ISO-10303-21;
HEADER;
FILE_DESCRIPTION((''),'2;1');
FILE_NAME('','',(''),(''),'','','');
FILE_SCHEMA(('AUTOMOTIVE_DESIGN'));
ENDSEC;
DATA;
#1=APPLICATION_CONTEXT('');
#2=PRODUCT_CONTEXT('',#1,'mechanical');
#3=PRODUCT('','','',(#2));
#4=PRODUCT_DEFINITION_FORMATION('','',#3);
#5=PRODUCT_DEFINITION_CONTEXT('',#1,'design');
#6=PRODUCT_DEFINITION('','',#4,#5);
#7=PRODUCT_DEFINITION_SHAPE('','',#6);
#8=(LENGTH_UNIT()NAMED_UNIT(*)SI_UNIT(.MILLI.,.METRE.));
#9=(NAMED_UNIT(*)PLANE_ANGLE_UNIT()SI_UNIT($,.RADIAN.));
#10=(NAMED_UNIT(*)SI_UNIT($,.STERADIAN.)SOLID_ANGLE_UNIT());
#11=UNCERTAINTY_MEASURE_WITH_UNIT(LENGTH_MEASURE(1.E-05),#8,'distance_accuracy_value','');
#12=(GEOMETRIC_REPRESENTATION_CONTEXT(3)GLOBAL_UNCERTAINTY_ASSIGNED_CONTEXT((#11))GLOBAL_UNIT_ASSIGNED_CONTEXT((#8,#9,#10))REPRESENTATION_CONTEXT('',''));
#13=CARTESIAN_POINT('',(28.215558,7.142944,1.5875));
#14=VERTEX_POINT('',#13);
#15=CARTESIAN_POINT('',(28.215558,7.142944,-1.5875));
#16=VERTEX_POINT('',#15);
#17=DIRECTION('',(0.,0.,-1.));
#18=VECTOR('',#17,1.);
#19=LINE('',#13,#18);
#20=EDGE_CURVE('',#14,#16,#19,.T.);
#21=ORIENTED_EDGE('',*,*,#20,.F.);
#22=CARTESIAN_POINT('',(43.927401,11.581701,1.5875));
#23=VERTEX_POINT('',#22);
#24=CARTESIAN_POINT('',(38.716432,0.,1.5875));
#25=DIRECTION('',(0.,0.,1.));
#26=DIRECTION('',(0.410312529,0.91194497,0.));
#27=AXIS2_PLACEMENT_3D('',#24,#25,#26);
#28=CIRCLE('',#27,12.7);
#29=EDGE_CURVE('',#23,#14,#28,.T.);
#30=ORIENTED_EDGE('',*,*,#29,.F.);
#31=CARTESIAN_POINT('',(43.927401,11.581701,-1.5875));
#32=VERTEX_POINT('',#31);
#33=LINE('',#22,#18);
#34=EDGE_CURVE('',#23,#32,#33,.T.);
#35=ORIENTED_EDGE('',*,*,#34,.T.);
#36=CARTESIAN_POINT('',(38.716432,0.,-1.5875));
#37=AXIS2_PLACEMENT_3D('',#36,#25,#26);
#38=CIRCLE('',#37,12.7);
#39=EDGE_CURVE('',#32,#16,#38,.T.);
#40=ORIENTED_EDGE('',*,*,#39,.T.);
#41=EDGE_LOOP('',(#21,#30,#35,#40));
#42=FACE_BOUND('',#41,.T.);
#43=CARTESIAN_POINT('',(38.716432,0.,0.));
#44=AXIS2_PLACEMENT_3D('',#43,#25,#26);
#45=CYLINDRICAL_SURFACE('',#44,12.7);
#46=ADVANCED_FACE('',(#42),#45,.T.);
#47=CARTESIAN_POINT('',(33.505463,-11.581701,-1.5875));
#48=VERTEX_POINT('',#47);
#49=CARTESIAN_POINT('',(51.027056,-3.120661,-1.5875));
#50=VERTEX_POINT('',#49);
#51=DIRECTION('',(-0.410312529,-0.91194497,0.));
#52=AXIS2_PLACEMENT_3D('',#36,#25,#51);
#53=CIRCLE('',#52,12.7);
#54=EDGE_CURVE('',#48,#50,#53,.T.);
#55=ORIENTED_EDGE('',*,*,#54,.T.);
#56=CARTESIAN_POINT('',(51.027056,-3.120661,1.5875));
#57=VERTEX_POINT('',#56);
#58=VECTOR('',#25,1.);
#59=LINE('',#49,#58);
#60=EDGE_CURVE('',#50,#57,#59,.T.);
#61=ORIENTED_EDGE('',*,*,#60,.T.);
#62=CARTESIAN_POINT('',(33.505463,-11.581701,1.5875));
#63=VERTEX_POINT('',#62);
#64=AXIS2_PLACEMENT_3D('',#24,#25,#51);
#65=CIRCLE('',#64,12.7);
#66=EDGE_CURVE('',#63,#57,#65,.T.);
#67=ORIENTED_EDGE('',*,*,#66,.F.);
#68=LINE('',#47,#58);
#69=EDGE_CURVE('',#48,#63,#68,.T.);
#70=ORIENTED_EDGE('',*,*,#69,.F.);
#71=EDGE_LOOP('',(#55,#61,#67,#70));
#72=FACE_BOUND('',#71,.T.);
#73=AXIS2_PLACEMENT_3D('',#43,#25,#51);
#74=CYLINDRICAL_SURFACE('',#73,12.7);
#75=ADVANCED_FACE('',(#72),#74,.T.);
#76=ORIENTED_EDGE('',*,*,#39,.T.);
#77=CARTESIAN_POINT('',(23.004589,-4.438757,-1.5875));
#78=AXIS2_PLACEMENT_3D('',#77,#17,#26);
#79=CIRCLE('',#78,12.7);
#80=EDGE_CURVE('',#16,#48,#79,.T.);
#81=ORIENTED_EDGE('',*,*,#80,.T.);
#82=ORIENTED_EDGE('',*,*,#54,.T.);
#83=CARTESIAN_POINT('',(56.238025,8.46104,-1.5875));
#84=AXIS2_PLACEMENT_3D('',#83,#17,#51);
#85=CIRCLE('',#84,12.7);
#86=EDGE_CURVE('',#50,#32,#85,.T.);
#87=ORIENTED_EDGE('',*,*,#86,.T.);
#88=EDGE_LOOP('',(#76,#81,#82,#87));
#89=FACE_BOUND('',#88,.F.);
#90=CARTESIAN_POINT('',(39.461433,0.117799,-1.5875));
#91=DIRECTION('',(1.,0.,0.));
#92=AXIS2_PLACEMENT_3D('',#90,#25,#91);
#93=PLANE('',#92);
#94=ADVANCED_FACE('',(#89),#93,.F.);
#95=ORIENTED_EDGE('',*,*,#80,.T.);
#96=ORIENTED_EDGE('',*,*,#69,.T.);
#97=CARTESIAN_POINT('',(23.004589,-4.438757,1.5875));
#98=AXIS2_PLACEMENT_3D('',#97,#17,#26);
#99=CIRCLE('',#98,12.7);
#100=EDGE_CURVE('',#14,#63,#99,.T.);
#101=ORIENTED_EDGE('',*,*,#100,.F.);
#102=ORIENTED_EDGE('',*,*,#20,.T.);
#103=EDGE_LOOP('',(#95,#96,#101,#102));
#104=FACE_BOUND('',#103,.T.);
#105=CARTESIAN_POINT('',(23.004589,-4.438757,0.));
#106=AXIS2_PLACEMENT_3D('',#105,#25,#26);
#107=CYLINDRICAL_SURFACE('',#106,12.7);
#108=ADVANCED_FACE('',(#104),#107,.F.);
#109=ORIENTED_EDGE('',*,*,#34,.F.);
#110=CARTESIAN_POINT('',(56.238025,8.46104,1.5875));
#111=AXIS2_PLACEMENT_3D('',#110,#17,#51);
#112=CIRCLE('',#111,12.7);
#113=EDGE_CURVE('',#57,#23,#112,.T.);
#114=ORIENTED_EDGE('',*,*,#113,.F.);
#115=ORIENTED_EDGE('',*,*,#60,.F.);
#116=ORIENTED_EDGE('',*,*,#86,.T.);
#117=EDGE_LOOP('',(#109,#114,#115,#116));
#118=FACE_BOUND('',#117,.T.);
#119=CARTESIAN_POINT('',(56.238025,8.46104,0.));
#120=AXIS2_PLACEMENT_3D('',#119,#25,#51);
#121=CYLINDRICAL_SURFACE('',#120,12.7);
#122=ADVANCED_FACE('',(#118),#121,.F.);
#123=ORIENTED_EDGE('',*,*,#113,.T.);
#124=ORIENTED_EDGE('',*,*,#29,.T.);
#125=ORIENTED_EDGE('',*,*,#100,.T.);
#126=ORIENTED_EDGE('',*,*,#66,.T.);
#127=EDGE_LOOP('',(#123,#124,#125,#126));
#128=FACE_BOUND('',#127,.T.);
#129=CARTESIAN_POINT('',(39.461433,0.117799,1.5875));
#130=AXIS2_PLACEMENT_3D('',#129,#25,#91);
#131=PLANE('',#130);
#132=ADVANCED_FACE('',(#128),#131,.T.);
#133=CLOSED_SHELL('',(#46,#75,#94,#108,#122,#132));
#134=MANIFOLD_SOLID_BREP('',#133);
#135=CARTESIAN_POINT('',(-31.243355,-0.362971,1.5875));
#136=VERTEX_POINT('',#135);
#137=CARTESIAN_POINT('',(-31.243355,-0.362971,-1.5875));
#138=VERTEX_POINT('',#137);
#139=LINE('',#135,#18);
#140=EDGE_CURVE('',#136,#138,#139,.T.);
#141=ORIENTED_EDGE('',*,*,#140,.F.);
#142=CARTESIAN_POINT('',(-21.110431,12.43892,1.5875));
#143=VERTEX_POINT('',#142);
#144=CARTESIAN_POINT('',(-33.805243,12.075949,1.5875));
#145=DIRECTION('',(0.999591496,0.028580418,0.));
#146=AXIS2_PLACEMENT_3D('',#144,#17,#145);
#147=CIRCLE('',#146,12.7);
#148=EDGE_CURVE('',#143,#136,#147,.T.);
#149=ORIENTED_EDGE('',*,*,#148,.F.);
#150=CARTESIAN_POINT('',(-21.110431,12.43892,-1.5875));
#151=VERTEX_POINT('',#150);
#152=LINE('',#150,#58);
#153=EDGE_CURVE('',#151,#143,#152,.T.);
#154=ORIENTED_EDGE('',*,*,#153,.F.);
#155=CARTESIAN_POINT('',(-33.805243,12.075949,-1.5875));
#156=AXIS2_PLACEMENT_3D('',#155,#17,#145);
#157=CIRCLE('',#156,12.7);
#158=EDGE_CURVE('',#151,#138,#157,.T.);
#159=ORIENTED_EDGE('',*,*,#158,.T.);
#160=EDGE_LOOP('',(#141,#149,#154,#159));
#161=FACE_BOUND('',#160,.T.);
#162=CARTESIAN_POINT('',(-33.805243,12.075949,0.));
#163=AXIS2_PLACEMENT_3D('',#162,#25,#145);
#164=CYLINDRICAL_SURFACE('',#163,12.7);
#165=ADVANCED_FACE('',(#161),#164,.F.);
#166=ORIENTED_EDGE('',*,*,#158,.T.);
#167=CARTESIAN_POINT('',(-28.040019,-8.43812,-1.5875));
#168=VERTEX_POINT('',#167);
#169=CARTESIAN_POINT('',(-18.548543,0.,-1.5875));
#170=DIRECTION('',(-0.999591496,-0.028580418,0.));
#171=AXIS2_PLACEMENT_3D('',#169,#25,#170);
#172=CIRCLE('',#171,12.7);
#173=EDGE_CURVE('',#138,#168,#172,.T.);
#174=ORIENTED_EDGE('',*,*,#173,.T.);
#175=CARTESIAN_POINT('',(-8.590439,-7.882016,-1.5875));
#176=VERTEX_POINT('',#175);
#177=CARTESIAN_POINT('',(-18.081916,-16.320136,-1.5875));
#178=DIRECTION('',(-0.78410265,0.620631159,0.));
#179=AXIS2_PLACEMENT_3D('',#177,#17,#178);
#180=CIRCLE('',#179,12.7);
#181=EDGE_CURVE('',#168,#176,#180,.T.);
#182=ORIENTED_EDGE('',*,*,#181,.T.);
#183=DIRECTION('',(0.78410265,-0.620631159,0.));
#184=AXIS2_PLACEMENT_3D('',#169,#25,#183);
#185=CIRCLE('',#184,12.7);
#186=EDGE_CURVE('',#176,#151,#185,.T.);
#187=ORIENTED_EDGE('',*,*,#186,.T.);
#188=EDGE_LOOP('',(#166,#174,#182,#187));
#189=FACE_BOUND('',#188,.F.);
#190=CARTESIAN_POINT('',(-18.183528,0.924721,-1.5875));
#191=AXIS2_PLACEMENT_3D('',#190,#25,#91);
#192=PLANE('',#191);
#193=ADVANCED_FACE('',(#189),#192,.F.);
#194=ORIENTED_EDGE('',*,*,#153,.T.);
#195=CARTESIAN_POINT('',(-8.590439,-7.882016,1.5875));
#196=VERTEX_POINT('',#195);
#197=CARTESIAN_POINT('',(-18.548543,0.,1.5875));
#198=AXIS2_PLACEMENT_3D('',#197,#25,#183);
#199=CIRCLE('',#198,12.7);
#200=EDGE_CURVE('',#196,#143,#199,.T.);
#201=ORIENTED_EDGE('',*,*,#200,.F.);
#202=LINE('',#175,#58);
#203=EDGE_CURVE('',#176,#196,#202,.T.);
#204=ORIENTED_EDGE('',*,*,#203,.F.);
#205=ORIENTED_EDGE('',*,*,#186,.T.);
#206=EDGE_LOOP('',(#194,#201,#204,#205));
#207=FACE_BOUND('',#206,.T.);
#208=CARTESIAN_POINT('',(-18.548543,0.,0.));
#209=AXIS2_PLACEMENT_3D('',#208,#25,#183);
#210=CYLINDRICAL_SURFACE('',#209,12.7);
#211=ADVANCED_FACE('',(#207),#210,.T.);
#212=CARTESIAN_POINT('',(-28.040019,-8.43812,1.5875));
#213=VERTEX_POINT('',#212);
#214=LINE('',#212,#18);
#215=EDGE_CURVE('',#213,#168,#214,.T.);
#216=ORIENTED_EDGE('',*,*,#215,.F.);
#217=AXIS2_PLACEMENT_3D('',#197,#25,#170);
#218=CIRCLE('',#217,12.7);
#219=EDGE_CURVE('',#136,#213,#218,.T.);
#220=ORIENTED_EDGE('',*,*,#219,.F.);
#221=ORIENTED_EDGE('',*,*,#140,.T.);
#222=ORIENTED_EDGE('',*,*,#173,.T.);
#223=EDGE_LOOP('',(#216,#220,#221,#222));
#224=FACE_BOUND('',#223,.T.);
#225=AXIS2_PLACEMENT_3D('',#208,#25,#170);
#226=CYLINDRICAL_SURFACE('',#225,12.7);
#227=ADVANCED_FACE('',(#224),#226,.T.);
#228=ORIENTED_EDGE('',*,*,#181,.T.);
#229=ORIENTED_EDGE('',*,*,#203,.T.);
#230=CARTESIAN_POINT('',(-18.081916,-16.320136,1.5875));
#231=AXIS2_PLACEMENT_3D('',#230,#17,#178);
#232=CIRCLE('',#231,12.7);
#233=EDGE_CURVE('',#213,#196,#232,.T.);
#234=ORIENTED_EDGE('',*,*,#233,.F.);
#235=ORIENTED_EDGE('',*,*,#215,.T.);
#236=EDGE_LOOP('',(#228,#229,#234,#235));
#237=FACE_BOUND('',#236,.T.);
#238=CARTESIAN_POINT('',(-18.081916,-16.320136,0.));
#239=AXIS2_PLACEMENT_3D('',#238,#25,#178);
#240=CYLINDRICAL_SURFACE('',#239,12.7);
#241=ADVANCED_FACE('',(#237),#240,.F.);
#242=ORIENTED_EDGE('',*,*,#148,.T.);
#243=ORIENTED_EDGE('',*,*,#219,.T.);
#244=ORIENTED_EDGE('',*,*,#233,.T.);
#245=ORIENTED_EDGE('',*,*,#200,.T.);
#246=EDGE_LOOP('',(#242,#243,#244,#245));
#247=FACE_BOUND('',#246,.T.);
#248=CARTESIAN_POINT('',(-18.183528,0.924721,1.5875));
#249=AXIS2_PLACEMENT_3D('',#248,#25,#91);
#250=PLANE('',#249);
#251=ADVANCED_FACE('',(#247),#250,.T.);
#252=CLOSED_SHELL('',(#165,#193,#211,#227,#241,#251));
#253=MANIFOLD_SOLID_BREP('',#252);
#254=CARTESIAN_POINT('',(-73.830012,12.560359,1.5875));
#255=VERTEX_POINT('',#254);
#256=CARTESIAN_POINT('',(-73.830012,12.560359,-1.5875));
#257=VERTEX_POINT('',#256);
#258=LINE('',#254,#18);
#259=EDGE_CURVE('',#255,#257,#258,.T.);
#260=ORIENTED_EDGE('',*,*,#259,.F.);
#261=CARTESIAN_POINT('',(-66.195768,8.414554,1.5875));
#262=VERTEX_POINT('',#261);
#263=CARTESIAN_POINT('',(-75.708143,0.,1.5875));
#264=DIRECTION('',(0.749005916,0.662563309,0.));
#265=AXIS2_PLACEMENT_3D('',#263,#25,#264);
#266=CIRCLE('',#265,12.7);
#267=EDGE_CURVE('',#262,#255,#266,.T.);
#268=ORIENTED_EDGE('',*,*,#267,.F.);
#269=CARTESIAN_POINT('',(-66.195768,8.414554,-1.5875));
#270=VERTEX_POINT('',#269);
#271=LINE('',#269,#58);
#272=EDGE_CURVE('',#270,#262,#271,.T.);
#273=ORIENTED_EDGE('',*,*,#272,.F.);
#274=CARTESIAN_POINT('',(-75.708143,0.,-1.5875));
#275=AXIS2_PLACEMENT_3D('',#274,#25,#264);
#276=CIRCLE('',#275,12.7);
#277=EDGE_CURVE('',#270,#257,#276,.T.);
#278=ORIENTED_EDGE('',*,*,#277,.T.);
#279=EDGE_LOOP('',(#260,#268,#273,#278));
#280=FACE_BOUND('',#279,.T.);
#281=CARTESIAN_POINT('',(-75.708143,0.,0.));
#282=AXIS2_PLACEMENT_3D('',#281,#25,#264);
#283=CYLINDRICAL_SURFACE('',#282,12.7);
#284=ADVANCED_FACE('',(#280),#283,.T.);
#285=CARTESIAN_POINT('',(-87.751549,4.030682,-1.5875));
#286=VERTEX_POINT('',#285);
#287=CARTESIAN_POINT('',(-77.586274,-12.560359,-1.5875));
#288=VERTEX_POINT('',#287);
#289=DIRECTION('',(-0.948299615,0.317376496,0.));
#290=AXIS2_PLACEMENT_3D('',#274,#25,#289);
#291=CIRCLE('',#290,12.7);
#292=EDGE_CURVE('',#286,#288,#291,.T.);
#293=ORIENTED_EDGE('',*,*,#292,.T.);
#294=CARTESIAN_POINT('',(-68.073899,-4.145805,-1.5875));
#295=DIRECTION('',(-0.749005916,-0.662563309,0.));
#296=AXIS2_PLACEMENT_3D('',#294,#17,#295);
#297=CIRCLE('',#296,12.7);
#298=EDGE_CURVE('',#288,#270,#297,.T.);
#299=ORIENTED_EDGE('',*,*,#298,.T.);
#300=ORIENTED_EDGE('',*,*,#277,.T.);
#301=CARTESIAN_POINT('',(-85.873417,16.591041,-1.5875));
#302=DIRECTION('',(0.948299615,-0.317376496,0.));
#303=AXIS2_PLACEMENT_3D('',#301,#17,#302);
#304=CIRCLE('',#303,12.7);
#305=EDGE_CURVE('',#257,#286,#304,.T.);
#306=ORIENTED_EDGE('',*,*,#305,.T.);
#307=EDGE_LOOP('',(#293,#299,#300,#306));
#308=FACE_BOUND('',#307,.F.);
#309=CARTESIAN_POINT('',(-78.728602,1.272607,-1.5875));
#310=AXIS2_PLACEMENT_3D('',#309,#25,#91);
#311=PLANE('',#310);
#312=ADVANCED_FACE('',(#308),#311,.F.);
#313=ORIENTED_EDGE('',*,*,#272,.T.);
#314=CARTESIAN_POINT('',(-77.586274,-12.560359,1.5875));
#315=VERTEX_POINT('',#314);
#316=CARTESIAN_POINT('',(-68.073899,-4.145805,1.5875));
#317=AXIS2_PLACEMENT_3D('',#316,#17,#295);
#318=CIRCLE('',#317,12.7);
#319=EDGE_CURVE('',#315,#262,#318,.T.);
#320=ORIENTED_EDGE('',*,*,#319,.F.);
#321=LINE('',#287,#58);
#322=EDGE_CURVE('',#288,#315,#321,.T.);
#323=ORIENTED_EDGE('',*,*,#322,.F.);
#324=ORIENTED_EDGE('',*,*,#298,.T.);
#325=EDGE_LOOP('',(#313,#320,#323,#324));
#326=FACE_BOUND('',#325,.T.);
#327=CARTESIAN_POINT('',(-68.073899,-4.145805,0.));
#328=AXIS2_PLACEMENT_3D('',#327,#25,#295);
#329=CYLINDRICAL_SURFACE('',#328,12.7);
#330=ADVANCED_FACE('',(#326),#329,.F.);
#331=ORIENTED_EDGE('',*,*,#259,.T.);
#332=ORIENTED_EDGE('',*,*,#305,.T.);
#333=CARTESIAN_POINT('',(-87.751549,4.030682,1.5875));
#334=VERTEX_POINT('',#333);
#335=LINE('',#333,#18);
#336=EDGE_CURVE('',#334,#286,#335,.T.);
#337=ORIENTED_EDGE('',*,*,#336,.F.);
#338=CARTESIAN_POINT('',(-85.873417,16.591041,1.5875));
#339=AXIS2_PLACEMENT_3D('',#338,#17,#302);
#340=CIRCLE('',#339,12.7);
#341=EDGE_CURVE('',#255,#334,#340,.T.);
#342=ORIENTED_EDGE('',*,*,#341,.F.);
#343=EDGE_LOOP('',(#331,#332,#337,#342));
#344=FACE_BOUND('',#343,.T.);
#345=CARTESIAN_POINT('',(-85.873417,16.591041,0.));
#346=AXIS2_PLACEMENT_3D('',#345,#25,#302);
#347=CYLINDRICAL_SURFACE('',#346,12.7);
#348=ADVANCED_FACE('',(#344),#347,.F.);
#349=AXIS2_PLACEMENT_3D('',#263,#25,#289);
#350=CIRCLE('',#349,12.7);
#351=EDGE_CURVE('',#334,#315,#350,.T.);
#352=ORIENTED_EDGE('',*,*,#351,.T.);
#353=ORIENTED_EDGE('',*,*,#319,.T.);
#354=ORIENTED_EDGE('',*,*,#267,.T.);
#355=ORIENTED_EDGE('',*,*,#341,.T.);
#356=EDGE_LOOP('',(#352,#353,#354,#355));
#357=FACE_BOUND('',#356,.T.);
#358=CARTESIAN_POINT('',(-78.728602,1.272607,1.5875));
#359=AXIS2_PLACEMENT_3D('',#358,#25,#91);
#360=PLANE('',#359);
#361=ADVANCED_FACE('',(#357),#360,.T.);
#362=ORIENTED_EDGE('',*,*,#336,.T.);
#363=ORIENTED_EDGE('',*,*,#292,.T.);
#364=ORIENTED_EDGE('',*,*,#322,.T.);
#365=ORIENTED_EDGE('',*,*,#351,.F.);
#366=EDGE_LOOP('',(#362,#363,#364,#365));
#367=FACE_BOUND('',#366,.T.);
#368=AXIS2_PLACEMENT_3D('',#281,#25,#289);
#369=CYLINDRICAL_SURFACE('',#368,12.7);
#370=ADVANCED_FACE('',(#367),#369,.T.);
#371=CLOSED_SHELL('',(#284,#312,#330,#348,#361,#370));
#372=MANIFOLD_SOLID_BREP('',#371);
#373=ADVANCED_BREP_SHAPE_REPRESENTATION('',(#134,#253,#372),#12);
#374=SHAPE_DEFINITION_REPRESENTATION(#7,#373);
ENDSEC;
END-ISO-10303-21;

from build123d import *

# Parameters (mm, degrees)
F1_DEPTH = 1.5875


# Not quite as in the source:
# - a feature of the source that left no trace in its solid (it failed there, or was rolled back) is left out


with BuildPart() as f1:
    # F0 (on Top) → F1 (new body, symmetric)
    with BuildSketch(Plane.XY):
        with BuildLine():
            ThreePointArc((28.2155579418, 7.1429440823), (35.2262329925, -0.9860169952), (33.5054625888, -11.5817011206))
            ThreePointArc((33.5054625888, -11.5817011206), (44.2389831087, -11.4364079158), (51.0270560551, -3.1206614946))
            ThreePointArc((51.0270560551, -3.1206614946), (44.8016172576, 2.9384882245), (43.9274008255, 11.5817011206))
            ThreePointArc((43.9274008255, 11.5817011206), (35.2636916641, 12.2216441691), (28.2155579418, 7.1429440823))
        make_face()
    extrude(amount=F1_DEPTH, both=True)


with BuildPart() as f1b:
    # F0 (on Top) → F1, piece 2 (new body, symmetric)
    with BuildSketch(Plane.XY):
        with BuildLine():
            ThreePointArc((-87.7515485228, 4.0306815011), (-86.5371761619, -6.634911433), (-77.5862744551, -12.5603592221))
            ThreePointArc((-77.5862744551, -12.5603592221), (-79.234417553, 1.9149565428), (-66.1957682837, 8.4145540225))
            ThreePointArc((-66.1957682837, 8.4145540225), (-69.6473816706, 11.1605182273), (-73.830012371, 12.5603592221))
            ThreePointArc((-73.830012371, 12.5603592221), (-79.2385060477, 5.7620079744), (-87.7515485228, 4.0306815011))
        make_face()
    extrude(amount=F1_DEPTH, both=True)


with BuildPart() as f1c:
    # F0 (on Top) → F1, piece 3 (new body, symmetric)
    with BuildSketch(Plane.XY):
        with BuildLine():
            ThreePointArc((-28.0400193697, -8.4381200139), (-18.444887024, -3.6253237231), (-8.5904389845, -7.8820157138))
            ThreePointArc((-8.5904389845, -7.8820157138), (-7.7359985931, 6.661748372), (-21.1104305579, 12.4389199798))
            ThreePointArc((-21.1104305579, 12.4389199798), (-23.8471389134, 4.1939329625), (-31.2433546383, -0.3629713035))
            ThreePointArc((-31.2433546383, -0.3629713035), (-30.3536202994, -4.6829628767), (-28.0400193697, -8.4381200139))
        make_face()
    extrude(amount=F1_DEPTH, both=True)


solid = Compound([f1.part, f1b.part, f1c.part])
